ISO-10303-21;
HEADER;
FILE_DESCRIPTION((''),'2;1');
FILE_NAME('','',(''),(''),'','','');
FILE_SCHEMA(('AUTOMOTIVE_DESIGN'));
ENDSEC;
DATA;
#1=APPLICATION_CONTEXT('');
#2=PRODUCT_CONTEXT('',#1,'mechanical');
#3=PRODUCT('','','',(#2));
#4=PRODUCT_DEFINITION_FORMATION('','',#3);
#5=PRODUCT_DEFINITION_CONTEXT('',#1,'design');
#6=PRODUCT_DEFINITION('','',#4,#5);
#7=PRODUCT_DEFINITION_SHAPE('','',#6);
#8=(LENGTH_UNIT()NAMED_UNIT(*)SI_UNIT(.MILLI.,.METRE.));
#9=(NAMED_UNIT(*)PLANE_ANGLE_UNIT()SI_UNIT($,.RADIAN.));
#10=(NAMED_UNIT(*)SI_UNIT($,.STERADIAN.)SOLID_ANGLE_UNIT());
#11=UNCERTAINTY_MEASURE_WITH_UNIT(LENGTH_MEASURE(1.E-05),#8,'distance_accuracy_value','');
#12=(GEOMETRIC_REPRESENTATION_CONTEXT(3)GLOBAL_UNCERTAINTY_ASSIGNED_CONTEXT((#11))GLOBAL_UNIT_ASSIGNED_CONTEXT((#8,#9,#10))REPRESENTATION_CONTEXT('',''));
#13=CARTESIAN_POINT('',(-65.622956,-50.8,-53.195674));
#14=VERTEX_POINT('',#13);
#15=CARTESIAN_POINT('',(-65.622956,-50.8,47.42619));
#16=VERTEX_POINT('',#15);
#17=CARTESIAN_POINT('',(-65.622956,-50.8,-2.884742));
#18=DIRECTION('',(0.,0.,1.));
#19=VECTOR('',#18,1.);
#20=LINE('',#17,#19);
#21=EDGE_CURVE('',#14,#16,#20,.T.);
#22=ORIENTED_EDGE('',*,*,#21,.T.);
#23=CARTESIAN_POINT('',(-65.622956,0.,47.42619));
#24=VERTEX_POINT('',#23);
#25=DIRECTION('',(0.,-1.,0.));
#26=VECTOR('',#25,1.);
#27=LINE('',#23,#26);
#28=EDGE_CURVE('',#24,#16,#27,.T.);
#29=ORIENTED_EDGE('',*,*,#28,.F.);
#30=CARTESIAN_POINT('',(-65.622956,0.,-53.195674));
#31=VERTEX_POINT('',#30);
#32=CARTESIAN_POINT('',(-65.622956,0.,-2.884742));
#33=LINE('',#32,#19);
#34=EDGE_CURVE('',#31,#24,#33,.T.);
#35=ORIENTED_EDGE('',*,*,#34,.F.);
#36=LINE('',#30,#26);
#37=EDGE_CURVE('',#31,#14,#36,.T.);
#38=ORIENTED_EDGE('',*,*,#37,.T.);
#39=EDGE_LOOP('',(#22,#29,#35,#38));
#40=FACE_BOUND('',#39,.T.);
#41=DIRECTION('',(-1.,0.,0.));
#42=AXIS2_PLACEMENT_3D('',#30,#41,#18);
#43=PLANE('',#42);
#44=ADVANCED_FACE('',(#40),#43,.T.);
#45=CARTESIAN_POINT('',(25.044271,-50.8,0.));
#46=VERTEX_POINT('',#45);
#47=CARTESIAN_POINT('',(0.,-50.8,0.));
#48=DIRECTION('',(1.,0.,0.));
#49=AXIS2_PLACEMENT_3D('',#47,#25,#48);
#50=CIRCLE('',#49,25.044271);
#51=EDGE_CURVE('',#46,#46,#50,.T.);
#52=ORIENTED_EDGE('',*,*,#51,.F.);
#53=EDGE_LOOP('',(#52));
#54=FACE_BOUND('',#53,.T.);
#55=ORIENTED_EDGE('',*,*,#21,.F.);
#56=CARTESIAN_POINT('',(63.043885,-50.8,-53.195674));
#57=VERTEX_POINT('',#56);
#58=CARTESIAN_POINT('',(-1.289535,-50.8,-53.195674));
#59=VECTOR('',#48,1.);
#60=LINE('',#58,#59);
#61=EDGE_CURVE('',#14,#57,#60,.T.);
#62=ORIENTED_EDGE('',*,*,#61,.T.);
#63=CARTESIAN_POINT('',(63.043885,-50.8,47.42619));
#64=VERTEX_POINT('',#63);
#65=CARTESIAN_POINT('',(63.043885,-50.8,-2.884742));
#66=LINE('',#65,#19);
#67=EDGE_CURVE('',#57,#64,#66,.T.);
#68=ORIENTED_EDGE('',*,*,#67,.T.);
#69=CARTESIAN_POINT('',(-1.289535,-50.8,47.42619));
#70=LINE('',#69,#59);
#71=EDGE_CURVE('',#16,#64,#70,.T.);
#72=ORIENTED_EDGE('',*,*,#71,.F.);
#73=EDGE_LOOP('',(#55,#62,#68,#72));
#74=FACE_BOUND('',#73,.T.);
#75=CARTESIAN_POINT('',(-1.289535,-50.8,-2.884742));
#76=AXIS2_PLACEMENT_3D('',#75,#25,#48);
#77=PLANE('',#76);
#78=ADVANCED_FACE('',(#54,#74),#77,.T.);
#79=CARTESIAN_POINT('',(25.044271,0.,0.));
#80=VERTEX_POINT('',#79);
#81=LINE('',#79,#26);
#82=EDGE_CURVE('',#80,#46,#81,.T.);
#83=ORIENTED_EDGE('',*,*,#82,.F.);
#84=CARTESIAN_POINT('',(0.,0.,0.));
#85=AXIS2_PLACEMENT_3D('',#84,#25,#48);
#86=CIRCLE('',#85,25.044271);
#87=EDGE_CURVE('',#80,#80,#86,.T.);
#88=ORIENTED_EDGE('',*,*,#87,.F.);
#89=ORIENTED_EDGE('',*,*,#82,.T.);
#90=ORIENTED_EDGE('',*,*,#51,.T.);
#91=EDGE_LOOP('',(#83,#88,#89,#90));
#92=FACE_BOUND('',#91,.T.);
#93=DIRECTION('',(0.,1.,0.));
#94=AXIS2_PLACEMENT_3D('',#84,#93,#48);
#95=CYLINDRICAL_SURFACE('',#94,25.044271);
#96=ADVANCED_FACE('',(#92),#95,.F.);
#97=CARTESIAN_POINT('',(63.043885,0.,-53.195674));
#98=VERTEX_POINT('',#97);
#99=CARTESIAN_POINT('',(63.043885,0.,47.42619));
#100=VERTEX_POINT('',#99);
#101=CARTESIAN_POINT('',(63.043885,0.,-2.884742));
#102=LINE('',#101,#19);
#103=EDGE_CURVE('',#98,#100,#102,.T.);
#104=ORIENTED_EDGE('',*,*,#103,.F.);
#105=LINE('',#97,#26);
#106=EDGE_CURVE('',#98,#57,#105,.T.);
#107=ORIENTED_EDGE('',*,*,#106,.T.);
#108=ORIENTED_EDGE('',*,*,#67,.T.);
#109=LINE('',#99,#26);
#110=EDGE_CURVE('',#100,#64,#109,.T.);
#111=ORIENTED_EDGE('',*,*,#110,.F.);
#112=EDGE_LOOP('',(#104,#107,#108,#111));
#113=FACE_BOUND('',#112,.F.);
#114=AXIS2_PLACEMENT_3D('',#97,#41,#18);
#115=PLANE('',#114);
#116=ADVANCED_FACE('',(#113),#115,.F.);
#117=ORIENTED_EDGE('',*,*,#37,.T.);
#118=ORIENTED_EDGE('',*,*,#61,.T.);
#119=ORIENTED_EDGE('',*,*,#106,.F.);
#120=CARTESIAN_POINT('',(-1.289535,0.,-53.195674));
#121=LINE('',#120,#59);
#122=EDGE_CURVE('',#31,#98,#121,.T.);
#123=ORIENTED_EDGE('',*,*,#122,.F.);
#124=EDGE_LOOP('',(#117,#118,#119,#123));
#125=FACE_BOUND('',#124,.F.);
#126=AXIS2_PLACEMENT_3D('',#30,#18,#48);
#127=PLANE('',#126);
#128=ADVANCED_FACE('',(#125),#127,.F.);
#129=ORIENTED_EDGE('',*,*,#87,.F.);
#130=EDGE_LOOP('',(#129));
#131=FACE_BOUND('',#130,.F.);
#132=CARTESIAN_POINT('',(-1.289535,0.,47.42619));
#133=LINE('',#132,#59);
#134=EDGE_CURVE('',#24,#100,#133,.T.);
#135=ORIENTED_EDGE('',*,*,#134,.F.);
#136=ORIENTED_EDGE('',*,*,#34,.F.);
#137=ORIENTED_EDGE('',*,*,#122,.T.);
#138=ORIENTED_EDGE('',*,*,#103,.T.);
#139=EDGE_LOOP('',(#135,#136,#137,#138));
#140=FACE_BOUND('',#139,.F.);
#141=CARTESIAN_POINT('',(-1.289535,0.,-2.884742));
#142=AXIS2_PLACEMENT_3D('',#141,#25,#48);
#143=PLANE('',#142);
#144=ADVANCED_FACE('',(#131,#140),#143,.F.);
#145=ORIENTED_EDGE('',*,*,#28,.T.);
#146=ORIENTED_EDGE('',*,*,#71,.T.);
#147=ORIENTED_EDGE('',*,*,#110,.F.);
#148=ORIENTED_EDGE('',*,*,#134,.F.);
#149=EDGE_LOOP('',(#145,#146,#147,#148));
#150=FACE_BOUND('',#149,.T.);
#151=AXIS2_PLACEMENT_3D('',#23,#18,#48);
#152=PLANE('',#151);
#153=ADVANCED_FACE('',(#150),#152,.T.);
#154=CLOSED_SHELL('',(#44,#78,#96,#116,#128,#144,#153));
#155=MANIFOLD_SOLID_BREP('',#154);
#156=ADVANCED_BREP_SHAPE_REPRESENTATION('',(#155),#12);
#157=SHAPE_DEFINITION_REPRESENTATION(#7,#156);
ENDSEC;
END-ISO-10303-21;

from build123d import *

# Parameters (mm, degrees)
F0_W     = 128.6668404937
F0_H     = 100.6218641996
F0_R     = 25.0442711875
F1_DEPTH = 50.8


# Not quite as in the source:
# - the program builds the solid bodies; features that only make, move or delete a surface that nothing else refers to are left out


with BuildPart() as f1:
    # F0 (on Front) → F1 (new body)
    with BuildSketch(Plane.XZ):
        with Locations((-1.2895353138, -2.8847418725)):
            Rectangle(F0_W, F0_H)
        Circle(F0_R, mode=Mode.SUBTRACT)
    extrude(amount=F1_DEPTH)


solid = f1.part
